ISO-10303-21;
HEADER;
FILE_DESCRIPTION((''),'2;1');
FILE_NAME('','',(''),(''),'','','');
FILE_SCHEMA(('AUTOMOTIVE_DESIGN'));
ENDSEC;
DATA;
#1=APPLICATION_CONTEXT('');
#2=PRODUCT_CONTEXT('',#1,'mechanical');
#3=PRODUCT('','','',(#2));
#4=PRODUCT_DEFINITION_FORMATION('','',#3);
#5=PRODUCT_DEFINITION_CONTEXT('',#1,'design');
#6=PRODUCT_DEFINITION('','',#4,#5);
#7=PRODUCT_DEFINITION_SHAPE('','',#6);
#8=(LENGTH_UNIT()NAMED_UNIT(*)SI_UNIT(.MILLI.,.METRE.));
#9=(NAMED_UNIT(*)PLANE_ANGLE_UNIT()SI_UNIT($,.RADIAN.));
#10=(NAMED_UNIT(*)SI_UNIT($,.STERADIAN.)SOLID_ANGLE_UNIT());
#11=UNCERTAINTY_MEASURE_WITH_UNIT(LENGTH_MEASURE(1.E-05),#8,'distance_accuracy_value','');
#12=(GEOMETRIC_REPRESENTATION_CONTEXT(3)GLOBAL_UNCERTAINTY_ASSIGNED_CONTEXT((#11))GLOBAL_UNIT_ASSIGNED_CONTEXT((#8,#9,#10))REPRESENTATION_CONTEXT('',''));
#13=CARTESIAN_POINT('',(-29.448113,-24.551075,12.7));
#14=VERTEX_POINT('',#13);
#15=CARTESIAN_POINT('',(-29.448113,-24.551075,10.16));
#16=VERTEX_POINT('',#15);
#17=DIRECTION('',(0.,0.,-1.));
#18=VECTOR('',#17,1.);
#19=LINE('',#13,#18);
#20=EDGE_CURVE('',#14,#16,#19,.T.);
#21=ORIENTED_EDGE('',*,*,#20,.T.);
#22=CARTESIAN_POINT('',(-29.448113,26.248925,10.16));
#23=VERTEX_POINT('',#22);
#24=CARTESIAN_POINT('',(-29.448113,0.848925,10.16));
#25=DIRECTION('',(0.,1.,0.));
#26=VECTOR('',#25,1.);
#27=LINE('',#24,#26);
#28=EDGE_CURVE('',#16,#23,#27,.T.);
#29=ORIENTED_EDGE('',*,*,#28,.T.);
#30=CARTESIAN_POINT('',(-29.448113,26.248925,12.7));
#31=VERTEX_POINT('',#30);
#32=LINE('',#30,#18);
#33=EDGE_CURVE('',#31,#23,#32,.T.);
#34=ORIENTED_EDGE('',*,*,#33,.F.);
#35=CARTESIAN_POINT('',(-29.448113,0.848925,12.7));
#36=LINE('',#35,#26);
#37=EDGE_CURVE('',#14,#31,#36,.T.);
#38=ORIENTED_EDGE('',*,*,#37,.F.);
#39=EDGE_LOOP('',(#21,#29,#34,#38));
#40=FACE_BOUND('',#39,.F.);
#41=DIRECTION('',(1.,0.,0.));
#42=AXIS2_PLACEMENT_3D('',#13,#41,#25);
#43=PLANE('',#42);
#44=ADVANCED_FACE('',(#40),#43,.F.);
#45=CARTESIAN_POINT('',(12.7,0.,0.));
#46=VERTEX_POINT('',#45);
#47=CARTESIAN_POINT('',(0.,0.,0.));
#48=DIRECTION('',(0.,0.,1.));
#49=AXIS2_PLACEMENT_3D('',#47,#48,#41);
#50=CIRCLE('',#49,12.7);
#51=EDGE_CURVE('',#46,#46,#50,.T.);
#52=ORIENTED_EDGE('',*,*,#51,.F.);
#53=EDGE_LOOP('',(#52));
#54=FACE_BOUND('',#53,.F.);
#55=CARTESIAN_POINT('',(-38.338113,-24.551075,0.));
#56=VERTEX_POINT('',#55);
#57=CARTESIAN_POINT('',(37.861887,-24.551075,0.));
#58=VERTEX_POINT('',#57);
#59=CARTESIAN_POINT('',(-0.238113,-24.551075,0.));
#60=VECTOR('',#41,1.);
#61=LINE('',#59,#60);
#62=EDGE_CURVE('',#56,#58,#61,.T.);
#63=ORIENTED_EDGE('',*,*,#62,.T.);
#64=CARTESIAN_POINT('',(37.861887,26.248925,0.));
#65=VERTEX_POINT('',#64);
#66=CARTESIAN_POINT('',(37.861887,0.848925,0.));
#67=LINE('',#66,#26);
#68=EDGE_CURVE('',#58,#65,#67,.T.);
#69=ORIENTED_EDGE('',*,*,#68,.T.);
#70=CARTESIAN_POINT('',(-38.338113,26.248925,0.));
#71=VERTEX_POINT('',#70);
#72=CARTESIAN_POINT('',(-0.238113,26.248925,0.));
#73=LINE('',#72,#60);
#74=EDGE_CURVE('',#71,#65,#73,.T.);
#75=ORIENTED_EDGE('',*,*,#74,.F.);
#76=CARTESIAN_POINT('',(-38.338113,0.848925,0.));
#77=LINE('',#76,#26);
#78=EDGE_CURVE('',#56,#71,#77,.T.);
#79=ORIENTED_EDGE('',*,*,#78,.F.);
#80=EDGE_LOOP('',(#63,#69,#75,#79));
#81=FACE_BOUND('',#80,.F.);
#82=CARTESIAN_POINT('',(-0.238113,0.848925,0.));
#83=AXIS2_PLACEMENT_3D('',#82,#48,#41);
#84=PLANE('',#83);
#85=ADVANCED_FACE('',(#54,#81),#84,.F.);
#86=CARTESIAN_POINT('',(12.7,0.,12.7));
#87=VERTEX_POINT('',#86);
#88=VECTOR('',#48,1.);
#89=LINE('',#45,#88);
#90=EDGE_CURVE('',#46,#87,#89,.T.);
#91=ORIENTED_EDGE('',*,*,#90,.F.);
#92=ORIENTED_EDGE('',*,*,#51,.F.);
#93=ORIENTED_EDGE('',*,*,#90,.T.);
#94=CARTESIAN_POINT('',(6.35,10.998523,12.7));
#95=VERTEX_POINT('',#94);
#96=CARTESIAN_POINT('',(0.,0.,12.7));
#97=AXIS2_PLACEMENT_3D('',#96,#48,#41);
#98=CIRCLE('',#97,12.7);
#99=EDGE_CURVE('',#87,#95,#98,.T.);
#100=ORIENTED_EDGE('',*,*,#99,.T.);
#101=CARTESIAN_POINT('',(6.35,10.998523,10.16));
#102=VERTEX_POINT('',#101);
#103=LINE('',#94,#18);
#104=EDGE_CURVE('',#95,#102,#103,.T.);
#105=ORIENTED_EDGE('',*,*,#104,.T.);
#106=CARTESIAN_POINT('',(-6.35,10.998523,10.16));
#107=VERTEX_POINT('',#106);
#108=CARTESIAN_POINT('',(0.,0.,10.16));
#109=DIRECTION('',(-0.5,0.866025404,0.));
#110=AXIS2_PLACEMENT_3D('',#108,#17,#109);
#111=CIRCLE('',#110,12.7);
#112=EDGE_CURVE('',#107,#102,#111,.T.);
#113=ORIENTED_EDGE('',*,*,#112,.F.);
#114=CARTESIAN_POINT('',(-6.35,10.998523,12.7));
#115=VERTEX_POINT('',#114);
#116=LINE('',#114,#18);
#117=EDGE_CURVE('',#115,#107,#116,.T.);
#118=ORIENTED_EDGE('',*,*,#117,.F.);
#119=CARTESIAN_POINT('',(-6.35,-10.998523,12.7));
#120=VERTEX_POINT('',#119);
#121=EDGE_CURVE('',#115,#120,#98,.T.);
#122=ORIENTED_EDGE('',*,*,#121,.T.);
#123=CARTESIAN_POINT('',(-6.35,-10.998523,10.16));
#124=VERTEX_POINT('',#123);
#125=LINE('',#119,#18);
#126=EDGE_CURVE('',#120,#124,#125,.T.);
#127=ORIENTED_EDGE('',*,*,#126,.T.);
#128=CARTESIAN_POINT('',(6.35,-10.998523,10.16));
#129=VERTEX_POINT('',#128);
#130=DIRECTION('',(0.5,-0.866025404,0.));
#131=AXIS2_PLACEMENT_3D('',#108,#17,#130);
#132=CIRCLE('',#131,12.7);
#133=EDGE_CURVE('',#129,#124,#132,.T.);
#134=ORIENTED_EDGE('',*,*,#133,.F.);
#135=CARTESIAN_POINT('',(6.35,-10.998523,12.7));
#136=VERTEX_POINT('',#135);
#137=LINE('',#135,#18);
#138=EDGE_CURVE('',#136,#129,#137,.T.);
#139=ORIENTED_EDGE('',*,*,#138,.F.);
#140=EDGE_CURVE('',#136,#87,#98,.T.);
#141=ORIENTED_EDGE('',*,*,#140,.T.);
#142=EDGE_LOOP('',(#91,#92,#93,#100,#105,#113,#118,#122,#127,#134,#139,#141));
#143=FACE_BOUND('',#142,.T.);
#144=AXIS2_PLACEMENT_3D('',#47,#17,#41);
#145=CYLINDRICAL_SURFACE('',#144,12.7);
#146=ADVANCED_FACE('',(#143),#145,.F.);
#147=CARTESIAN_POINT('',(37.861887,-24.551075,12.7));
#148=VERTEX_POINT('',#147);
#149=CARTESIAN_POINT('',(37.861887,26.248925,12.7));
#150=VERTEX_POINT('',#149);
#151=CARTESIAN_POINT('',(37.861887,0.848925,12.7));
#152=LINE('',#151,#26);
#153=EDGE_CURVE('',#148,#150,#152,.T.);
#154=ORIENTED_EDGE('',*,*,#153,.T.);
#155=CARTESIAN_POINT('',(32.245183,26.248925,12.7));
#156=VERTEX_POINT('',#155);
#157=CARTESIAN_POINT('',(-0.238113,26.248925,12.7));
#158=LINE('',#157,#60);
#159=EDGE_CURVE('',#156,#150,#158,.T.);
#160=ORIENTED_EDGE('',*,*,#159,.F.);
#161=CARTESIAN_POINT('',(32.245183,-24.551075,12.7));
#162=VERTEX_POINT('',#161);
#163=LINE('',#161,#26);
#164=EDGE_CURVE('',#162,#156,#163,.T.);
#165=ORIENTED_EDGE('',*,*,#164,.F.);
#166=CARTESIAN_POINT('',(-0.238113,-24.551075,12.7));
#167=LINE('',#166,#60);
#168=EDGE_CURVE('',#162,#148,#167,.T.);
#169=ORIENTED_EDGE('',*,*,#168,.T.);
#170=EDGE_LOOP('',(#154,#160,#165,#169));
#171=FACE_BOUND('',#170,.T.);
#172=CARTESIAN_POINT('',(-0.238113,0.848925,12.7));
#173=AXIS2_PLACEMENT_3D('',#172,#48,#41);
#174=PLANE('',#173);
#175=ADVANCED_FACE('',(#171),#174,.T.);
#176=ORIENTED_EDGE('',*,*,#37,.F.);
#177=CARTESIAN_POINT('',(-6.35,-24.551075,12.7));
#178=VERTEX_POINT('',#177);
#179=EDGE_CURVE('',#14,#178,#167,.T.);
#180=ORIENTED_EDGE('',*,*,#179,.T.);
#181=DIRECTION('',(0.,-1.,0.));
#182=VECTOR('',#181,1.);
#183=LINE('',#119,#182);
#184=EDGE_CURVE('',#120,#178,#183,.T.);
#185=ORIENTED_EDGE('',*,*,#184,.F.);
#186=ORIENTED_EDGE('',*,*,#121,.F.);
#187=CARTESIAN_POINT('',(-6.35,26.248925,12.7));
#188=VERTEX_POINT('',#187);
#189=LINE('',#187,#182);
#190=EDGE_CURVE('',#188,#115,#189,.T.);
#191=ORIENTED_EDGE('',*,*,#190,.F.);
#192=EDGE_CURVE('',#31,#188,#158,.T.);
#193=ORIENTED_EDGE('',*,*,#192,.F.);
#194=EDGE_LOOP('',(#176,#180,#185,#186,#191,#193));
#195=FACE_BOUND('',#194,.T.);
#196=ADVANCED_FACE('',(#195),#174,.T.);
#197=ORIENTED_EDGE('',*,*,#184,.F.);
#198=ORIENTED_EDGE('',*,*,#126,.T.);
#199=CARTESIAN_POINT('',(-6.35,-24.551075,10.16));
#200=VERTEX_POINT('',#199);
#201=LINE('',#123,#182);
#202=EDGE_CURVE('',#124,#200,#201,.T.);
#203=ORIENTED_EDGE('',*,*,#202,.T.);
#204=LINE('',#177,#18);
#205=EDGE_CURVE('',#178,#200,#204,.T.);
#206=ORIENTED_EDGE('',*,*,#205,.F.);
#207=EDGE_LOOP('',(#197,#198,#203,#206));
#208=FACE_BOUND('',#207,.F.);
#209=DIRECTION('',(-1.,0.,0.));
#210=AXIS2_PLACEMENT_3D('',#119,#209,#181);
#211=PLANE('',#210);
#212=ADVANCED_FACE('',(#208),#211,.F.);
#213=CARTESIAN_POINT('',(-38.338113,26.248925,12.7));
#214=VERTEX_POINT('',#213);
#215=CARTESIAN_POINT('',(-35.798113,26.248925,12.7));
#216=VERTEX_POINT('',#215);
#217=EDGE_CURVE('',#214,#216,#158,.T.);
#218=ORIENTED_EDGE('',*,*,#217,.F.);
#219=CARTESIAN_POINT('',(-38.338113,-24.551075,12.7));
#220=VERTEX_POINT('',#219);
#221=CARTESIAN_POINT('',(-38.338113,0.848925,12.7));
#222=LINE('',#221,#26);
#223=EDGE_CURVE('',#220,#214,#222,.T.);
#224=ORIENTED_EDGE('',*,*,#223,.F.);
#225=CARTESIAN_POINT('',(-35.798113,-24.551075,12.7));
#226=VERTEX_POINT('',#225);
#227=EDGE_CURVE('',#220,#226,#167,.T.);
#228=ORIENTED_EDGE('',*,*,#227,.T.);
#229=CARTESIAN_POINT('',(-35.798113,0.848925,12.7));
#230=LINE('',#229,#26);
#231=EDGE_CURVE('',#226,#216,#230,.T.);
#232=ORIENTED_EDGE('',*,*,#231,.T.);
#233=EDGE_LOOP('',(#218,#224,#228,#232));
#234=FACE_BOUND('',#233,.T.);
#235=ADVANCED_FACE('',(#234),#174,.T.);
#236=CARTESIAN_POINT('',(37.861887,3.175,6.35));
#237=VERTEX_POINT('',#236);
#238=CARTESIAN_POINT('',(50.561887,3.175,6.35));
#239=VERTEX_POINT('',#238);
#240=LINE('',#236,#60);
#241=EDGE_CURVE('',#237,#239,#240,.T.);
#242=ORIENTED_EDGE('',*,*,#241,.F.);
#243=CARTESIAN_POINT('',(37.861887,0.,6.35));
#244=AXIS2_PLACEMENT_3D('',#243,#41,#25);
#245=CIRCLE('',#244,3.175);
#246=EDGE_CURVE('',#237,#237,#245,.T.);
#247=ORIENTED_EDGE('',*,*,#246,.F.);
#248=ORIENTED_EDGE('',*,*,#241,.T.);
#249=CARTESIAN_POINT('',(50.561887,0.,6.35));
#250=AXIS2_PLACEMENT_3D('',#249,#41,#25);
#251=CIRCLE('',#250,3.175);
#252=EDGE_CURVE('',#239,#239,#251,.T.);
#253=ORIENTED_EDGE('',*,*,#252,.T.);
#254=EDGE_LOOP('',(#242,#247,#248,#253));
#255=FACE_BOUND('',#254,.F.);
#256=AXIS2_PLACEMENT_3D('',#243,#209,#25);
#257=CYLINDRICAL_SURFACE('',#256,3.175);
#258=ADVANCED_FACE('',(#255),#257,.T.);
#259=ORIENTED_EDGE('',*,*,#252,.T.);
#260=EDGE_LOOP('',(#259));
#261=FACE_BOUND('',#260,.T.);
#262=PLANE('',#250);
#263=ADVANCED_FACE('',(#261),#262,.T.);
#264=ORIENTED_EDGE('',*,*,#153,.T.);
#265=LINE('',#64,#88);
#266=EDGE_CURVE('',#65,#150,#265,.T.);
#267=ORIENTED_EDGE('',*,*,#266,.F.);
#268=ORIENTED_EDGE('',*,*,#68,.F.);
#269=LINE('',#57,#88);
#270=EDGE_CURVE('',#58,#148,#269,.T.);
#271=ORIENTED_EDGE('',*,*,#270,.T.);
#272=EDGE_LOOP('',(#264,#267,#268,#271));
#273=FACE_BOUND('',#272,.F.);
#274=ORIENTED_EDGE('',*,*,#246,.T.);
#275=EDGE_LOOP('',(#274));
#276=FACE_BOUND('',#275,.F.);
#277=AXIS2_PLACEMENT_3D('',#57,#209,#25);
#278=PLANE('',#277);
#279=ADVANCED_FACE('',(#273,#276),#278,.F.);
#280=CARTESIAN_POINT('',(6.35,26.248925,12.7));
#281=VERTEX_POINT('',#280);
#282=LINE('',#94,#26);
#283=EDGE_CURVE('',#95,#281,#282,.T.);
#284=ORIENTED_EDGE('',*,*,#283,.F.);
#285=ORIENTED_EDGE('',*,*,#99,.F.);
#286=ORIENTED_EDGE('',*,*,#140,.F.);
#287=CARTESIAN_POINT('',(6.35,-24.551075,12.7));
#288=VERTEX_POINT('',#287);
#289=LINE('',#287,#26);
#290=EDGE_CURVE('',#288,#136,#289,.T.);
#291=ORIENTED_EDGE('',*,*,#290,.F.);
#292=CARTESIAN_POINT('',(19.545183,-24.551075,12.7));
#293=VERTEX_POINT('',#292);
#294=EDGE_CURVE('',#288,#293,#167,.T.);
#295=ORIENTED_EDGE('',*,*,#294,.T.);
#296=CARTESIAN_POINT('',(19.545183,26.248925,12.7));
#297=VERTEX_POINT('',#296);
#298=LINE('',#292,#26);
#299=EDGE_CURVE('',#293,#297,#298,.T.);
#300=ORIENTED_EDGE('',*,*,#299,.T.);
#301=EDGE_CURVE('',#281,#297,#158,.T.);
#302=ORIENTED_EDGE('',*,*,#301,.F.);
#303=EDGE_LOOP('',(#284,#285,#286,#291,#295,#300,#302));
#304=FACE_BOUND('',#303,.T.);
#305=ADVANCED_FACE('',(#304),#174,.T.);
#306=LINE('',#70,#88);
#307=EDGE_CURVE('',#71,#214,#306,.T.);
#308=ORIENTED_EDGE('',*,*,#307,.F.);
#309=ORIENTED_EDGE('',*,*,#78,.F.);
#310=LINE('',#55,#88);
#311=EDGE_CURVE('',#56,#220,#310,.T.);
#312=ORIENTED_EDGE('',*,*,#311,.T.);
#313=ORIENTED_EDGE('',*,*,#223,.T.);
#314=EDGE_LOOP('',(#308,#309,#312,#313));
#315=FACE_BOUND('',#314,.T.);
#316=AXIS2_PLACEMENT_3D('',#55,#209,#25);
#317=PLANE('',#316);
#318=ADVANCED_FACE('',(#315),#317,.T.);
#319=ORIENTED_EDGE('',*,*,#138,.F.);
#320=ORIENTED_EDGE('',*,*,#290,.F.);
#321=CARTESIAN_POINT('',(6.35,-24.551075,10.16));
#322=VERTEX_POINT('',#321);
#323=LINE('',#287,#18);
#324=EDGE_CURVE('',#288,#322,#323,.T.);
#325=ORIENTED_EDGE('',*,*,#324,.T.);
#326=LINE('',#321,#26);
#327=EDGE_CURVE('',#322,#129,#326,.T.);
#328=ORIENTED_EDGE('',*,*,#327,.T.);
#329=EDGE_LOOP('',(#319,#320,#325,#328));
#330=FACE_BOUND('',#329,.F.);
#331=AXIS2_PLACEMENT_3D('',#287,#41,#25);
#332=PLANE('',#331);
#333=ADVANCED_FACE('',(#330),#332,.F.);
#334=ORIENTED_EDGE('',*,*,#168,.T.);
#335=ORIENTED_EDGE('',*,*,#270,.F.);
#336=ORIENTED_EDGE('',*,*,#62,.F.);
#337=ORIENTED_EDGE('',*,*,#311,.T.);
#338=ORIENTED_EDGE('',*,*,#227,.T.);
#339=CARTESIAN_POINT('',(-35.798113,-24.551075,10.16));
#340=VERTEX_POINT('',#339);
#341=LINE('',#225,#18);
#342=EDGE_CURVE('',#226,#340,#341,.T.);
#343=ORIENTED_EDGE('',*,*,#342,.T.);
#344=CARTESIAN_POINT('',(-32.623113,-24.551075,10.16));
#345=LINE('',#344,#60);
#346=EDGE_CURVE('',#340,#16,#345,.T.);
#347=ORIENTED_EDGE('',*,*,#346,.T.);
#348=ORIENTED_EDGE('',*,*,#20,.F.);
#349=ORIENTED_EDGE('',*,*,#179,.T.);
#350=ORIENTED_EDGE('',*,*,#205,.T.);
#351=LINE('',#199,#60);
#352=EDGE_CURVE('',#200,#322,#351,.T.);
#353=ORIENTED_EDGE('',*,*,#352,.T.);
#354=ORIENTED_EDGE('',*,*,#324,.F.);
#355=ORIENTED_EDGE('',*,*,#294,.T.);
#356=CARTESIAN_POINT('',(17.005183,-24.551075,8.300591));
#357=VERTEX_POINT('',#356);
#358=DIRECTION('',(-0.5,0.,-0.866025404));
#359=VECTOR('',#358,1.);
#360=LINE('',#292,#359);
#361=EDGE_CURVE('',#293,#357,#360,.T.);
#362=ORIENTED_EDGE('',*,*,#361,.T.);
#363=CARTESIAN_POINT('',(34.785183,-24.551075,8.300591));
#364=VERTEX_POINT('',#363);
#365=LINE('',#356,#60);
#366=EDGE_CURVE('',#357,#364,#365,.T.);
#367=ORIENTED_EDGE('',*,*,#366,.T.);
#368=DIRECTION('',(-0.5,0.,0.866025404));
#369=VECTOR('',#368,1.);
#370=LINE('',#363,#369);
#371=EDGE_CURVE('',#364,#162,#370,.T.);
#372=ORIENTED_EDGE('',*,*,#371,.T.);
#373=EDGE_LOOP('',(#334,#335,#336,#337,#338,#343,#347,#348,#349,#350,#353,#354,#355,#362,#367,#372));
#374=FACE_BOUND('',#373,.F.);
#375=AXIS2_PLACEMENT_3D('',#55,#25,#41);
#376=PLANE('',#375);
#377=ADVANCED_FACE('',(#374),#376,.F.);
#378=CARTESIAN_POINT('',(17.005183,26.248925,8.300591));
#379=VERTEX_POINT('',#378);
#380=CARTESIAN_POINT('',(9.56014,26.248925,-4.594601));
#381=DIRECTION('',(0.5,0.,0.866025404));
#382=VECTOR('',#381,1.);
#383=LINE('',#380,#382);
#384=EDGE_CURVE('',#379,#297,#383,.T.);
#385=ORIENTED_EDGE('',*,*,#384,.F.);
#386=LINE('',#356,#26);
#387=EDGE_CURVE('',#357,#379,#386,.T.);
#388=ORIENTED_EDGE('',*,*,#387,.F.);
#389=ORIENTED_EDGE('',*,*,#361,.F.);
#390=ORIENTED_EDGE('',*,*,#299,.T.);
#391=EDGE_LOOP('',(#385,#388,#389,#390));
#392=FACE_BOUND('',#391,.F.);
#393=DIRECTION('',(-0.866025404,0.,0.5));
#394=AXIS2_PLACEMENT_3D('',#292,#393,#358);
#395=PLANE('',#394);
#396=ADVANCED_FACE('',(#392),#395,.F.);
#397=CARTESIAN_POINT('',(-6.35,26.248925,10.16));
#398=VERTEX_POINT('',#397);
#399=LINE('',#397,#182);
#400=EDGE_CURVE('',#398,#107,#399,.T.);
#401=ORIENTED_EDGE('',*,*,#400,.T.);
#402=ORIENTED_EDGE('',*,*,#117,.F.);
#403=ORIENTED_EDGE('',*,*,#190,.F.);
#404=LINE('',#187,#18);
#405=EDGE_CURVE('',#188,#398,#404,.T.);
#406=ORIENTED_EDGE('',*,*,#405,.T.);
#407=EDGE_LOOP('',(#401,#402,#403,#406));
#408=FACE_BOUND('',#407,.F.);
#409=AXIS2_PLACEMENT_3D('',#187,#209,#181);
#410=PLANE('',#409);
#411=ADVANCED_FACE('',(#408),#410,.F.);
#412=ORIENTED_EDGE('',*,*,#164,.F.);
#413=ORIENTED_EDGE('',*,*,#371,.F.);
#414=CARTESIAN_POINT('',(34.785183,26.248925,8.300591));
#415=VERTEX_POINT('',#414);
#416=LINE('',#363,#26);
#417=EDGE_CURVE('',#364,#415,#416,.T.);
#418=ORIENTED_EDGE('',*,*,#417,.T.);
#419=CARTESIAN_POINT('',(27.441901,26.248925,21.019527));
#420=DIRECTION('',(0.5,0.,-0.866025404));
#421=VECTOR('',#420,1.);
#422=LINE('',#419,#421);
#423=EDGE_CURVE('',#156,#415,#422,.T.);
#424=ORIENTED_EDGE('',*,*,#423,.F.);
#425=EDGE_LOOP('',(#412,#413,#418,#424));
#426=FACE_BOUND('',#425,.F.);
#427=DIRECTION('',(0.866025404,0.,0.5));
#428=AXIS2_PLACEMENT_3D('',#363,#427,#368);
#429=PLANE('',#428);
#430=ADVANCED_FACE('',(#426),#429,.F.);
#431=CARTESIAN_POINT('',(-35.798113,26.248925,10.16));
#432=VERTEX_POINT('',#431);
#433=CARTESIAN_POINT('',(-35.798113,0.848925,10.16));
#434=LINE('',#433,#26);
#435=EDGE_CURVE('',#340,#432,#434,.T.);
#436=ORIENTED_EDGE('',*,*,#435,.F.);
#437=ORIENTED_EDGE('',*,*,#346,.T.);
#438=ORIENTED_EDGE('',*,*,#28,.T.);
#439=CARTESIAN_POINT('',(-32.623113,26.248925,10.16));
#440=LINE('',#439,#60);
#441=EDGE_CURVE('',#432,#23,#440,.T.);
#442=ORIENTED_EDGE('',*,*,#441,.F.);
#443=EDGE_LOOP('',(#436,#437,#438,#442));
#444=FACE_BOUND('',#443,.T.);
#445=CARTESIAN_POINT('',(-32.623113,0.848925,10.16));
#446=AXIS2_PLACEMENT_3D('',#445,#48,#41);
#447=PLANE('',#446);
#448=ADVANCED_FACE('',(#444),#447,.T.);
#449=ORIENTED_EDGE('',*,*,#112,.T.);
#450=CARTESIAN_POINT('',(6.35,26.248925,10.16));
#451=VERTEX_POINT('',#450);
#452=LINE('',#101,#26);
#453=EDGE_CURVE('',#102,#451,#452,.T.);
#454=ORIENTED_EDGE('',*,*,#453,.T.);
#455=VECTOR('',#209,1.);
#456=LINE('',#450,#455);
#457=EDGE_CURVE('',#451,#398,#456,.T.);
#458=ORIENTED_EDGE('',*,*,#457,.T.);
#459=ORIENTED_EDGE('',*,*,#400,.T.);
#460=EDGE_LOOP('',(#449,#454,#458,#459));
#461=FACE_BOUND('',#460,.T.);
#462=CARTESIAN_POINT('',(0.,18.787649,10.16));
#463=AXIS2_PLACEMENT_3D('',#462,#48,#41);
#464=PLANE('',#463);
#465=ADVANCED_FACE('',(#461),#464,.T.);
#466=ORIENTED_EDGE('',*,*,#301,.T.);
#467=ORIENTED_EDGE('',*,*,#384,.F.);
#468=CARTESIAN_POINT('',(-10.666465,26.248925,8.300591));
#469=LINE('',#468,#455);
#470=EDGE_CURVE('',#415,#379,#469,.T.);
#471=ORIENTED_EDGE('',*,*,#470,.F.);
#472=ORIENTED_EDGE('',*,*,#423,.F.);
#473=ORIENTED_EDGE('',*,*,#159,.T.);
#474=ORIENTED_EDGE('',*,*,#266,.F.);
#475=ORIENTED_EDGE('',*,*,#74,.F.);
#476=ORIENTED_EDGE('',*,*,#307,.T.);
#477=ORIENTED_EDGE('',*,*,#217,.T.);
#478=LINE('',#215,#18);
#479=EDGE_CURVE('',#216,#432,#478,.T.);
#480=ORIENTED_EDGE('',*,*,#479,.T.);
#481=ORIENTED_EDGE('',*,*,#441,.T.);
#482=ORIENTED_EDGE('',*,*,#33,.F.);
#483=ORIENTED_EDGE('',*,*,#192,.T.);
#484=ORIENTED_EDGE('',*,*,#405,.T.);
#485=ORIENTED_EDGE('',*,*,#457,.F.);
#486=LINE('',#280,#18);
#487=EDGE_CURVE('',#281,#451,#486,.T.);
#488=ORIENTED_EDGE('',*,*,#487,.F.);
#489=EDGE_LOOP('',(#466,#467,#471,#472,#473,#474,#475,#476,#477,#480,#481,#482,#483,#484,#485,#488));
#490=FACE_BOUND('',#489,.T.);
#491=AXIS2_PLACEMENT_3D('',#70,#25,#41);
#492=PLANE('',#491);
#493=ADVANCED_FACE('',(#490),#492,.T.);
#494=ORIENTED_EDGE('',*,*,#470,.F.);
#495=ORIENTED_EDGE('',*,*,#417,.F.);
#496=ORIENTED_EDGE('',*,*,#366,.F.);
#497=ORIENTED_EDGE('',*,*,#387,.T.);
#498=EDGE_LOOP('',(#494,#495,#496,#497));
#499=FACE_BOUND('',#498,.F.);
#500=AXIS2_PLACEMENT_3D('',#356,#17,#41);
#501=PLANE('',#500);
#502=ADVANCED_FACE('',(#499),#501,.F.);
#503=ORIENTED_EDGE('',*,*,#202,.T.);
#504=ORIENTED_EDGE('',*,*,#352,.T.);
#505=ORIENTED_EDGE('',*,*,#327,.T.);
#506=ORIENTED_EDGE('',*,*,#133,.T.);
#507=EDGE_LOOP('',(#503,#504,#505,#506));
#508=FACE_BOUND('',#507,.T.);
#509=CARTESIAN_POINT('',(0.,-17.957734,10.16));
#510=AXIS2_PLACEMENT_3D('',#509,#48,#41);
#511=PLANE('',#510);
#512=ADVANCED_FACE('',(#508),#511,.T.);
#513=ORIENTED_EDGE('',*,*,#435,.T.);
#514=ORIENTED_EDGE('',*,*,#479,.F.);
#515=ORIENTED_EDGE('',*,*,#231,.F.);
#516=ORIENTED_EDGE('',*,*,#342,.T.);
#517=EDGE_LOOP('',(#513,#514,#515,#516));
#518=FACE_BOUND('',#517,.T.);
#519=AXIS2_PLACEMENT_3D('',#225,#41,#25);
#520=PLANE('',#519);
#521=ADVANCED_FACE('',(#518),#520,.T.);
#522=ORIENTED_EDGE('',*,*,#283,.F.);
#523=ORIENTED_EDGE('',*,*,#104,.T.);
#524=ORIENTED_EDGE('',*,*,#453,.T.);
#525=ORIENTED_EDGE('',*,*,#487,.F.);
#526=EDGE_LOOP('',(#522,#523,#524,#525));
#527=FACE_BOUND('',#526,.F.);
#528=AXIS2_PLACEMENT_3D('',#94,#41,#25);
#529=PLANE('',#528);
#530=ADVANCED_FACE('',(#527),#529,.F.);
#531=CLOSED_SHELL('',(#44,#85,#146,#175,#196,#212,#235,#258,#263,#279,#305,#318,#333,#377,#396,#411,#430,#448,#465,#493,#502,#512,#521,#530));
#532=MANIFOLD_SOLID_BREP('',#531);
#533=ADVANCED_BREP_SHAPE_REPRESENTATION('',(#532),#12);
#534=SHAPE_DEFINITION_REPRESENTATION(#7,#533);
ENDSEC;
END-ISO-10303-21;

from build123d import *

# Parameters (mm, degrees)
F0_W     = 76.2
F0_H     = 50.8
F0_R     = 12.7
F1_DEPTH = 12.7
F2_W     = 6.35
F2_H     = 50.8
F3_DEPTH = 2.54
F5_DEPTH = 58
F6_R     = 3.175
F7_DEPTH = 12.7


# Not quite as in the source:
# - a feature names something its author has since deleted; it is built from what else it names


with BuildPart() as f1:
    # F0 (on Top) → F1 (new body)
    with BuildSketch(Plane.XY):
        with Locations((-0.2381126344, 0.8489250481)):
            Rectangle(F0_W, F0_H)
        Circle(F0_R, mode=Mode.SUBTRACT)
    extrude(amount=F1_DEPTH)

    # F2 (on face) → F3 (cut)
    with BuildSketch(Plane.XY.offset(12.7)):
        with BuildLine():
            Line((6.35, 26.2489250481), (-6.35, 26.2489250481))
            Line((-6.35, 26.2489250481), (-6.35, 10.9985226281))
            ThreePointArc((-6.35, 10.9985226281), (0, 12.7), (6.35, 10.9985226281))
            Line((6.35, 10.9985226281), (6.35, 26.2489250481))
        make_face()
        with BuildLine():
            ThreePointArc((6.35, -10.9985226281), (0, -12.7), (-6.35, -10.9985226281))
            Line((-6.35, -10.9985226281), (-6.35, -24.5510749519))
            Line((-6.35, -24.5510749519), (6.35, -24.5510749519))
            Line((6.35, -24.5510749519), (6.35, -10.9985226281))
        make_face()
        with Locations((-32.6231126344, 0.8489250481)):
            Rectangle(F2_W, F2_H)
    extrude(amount=-F3_DEPTH, mode=Mode.SUBTRACT)

    # F4 (on face) → F5 (cut)
    with BuildSketch(Plane.XZ.offset(24.5510749519)):
        Polygon((32.2451825857, 12.7), (19.5451825857, 12.7), (17.0051825857, 8.3005909488), (34.7851825857, 8.3005909488), align=None)
    extrude(amount=-F5_DEPTH, mode=Mode.SUBTRACT)

    # F6 (on face) → F7 (join)
    with BuildSketch(Plane.YZ.offset(37.8618873656)):
        with Locations((0, 6.35)):
            Circle(F6_R)
    extrude(amount=F7_DEPTH)


solid = f1.part
